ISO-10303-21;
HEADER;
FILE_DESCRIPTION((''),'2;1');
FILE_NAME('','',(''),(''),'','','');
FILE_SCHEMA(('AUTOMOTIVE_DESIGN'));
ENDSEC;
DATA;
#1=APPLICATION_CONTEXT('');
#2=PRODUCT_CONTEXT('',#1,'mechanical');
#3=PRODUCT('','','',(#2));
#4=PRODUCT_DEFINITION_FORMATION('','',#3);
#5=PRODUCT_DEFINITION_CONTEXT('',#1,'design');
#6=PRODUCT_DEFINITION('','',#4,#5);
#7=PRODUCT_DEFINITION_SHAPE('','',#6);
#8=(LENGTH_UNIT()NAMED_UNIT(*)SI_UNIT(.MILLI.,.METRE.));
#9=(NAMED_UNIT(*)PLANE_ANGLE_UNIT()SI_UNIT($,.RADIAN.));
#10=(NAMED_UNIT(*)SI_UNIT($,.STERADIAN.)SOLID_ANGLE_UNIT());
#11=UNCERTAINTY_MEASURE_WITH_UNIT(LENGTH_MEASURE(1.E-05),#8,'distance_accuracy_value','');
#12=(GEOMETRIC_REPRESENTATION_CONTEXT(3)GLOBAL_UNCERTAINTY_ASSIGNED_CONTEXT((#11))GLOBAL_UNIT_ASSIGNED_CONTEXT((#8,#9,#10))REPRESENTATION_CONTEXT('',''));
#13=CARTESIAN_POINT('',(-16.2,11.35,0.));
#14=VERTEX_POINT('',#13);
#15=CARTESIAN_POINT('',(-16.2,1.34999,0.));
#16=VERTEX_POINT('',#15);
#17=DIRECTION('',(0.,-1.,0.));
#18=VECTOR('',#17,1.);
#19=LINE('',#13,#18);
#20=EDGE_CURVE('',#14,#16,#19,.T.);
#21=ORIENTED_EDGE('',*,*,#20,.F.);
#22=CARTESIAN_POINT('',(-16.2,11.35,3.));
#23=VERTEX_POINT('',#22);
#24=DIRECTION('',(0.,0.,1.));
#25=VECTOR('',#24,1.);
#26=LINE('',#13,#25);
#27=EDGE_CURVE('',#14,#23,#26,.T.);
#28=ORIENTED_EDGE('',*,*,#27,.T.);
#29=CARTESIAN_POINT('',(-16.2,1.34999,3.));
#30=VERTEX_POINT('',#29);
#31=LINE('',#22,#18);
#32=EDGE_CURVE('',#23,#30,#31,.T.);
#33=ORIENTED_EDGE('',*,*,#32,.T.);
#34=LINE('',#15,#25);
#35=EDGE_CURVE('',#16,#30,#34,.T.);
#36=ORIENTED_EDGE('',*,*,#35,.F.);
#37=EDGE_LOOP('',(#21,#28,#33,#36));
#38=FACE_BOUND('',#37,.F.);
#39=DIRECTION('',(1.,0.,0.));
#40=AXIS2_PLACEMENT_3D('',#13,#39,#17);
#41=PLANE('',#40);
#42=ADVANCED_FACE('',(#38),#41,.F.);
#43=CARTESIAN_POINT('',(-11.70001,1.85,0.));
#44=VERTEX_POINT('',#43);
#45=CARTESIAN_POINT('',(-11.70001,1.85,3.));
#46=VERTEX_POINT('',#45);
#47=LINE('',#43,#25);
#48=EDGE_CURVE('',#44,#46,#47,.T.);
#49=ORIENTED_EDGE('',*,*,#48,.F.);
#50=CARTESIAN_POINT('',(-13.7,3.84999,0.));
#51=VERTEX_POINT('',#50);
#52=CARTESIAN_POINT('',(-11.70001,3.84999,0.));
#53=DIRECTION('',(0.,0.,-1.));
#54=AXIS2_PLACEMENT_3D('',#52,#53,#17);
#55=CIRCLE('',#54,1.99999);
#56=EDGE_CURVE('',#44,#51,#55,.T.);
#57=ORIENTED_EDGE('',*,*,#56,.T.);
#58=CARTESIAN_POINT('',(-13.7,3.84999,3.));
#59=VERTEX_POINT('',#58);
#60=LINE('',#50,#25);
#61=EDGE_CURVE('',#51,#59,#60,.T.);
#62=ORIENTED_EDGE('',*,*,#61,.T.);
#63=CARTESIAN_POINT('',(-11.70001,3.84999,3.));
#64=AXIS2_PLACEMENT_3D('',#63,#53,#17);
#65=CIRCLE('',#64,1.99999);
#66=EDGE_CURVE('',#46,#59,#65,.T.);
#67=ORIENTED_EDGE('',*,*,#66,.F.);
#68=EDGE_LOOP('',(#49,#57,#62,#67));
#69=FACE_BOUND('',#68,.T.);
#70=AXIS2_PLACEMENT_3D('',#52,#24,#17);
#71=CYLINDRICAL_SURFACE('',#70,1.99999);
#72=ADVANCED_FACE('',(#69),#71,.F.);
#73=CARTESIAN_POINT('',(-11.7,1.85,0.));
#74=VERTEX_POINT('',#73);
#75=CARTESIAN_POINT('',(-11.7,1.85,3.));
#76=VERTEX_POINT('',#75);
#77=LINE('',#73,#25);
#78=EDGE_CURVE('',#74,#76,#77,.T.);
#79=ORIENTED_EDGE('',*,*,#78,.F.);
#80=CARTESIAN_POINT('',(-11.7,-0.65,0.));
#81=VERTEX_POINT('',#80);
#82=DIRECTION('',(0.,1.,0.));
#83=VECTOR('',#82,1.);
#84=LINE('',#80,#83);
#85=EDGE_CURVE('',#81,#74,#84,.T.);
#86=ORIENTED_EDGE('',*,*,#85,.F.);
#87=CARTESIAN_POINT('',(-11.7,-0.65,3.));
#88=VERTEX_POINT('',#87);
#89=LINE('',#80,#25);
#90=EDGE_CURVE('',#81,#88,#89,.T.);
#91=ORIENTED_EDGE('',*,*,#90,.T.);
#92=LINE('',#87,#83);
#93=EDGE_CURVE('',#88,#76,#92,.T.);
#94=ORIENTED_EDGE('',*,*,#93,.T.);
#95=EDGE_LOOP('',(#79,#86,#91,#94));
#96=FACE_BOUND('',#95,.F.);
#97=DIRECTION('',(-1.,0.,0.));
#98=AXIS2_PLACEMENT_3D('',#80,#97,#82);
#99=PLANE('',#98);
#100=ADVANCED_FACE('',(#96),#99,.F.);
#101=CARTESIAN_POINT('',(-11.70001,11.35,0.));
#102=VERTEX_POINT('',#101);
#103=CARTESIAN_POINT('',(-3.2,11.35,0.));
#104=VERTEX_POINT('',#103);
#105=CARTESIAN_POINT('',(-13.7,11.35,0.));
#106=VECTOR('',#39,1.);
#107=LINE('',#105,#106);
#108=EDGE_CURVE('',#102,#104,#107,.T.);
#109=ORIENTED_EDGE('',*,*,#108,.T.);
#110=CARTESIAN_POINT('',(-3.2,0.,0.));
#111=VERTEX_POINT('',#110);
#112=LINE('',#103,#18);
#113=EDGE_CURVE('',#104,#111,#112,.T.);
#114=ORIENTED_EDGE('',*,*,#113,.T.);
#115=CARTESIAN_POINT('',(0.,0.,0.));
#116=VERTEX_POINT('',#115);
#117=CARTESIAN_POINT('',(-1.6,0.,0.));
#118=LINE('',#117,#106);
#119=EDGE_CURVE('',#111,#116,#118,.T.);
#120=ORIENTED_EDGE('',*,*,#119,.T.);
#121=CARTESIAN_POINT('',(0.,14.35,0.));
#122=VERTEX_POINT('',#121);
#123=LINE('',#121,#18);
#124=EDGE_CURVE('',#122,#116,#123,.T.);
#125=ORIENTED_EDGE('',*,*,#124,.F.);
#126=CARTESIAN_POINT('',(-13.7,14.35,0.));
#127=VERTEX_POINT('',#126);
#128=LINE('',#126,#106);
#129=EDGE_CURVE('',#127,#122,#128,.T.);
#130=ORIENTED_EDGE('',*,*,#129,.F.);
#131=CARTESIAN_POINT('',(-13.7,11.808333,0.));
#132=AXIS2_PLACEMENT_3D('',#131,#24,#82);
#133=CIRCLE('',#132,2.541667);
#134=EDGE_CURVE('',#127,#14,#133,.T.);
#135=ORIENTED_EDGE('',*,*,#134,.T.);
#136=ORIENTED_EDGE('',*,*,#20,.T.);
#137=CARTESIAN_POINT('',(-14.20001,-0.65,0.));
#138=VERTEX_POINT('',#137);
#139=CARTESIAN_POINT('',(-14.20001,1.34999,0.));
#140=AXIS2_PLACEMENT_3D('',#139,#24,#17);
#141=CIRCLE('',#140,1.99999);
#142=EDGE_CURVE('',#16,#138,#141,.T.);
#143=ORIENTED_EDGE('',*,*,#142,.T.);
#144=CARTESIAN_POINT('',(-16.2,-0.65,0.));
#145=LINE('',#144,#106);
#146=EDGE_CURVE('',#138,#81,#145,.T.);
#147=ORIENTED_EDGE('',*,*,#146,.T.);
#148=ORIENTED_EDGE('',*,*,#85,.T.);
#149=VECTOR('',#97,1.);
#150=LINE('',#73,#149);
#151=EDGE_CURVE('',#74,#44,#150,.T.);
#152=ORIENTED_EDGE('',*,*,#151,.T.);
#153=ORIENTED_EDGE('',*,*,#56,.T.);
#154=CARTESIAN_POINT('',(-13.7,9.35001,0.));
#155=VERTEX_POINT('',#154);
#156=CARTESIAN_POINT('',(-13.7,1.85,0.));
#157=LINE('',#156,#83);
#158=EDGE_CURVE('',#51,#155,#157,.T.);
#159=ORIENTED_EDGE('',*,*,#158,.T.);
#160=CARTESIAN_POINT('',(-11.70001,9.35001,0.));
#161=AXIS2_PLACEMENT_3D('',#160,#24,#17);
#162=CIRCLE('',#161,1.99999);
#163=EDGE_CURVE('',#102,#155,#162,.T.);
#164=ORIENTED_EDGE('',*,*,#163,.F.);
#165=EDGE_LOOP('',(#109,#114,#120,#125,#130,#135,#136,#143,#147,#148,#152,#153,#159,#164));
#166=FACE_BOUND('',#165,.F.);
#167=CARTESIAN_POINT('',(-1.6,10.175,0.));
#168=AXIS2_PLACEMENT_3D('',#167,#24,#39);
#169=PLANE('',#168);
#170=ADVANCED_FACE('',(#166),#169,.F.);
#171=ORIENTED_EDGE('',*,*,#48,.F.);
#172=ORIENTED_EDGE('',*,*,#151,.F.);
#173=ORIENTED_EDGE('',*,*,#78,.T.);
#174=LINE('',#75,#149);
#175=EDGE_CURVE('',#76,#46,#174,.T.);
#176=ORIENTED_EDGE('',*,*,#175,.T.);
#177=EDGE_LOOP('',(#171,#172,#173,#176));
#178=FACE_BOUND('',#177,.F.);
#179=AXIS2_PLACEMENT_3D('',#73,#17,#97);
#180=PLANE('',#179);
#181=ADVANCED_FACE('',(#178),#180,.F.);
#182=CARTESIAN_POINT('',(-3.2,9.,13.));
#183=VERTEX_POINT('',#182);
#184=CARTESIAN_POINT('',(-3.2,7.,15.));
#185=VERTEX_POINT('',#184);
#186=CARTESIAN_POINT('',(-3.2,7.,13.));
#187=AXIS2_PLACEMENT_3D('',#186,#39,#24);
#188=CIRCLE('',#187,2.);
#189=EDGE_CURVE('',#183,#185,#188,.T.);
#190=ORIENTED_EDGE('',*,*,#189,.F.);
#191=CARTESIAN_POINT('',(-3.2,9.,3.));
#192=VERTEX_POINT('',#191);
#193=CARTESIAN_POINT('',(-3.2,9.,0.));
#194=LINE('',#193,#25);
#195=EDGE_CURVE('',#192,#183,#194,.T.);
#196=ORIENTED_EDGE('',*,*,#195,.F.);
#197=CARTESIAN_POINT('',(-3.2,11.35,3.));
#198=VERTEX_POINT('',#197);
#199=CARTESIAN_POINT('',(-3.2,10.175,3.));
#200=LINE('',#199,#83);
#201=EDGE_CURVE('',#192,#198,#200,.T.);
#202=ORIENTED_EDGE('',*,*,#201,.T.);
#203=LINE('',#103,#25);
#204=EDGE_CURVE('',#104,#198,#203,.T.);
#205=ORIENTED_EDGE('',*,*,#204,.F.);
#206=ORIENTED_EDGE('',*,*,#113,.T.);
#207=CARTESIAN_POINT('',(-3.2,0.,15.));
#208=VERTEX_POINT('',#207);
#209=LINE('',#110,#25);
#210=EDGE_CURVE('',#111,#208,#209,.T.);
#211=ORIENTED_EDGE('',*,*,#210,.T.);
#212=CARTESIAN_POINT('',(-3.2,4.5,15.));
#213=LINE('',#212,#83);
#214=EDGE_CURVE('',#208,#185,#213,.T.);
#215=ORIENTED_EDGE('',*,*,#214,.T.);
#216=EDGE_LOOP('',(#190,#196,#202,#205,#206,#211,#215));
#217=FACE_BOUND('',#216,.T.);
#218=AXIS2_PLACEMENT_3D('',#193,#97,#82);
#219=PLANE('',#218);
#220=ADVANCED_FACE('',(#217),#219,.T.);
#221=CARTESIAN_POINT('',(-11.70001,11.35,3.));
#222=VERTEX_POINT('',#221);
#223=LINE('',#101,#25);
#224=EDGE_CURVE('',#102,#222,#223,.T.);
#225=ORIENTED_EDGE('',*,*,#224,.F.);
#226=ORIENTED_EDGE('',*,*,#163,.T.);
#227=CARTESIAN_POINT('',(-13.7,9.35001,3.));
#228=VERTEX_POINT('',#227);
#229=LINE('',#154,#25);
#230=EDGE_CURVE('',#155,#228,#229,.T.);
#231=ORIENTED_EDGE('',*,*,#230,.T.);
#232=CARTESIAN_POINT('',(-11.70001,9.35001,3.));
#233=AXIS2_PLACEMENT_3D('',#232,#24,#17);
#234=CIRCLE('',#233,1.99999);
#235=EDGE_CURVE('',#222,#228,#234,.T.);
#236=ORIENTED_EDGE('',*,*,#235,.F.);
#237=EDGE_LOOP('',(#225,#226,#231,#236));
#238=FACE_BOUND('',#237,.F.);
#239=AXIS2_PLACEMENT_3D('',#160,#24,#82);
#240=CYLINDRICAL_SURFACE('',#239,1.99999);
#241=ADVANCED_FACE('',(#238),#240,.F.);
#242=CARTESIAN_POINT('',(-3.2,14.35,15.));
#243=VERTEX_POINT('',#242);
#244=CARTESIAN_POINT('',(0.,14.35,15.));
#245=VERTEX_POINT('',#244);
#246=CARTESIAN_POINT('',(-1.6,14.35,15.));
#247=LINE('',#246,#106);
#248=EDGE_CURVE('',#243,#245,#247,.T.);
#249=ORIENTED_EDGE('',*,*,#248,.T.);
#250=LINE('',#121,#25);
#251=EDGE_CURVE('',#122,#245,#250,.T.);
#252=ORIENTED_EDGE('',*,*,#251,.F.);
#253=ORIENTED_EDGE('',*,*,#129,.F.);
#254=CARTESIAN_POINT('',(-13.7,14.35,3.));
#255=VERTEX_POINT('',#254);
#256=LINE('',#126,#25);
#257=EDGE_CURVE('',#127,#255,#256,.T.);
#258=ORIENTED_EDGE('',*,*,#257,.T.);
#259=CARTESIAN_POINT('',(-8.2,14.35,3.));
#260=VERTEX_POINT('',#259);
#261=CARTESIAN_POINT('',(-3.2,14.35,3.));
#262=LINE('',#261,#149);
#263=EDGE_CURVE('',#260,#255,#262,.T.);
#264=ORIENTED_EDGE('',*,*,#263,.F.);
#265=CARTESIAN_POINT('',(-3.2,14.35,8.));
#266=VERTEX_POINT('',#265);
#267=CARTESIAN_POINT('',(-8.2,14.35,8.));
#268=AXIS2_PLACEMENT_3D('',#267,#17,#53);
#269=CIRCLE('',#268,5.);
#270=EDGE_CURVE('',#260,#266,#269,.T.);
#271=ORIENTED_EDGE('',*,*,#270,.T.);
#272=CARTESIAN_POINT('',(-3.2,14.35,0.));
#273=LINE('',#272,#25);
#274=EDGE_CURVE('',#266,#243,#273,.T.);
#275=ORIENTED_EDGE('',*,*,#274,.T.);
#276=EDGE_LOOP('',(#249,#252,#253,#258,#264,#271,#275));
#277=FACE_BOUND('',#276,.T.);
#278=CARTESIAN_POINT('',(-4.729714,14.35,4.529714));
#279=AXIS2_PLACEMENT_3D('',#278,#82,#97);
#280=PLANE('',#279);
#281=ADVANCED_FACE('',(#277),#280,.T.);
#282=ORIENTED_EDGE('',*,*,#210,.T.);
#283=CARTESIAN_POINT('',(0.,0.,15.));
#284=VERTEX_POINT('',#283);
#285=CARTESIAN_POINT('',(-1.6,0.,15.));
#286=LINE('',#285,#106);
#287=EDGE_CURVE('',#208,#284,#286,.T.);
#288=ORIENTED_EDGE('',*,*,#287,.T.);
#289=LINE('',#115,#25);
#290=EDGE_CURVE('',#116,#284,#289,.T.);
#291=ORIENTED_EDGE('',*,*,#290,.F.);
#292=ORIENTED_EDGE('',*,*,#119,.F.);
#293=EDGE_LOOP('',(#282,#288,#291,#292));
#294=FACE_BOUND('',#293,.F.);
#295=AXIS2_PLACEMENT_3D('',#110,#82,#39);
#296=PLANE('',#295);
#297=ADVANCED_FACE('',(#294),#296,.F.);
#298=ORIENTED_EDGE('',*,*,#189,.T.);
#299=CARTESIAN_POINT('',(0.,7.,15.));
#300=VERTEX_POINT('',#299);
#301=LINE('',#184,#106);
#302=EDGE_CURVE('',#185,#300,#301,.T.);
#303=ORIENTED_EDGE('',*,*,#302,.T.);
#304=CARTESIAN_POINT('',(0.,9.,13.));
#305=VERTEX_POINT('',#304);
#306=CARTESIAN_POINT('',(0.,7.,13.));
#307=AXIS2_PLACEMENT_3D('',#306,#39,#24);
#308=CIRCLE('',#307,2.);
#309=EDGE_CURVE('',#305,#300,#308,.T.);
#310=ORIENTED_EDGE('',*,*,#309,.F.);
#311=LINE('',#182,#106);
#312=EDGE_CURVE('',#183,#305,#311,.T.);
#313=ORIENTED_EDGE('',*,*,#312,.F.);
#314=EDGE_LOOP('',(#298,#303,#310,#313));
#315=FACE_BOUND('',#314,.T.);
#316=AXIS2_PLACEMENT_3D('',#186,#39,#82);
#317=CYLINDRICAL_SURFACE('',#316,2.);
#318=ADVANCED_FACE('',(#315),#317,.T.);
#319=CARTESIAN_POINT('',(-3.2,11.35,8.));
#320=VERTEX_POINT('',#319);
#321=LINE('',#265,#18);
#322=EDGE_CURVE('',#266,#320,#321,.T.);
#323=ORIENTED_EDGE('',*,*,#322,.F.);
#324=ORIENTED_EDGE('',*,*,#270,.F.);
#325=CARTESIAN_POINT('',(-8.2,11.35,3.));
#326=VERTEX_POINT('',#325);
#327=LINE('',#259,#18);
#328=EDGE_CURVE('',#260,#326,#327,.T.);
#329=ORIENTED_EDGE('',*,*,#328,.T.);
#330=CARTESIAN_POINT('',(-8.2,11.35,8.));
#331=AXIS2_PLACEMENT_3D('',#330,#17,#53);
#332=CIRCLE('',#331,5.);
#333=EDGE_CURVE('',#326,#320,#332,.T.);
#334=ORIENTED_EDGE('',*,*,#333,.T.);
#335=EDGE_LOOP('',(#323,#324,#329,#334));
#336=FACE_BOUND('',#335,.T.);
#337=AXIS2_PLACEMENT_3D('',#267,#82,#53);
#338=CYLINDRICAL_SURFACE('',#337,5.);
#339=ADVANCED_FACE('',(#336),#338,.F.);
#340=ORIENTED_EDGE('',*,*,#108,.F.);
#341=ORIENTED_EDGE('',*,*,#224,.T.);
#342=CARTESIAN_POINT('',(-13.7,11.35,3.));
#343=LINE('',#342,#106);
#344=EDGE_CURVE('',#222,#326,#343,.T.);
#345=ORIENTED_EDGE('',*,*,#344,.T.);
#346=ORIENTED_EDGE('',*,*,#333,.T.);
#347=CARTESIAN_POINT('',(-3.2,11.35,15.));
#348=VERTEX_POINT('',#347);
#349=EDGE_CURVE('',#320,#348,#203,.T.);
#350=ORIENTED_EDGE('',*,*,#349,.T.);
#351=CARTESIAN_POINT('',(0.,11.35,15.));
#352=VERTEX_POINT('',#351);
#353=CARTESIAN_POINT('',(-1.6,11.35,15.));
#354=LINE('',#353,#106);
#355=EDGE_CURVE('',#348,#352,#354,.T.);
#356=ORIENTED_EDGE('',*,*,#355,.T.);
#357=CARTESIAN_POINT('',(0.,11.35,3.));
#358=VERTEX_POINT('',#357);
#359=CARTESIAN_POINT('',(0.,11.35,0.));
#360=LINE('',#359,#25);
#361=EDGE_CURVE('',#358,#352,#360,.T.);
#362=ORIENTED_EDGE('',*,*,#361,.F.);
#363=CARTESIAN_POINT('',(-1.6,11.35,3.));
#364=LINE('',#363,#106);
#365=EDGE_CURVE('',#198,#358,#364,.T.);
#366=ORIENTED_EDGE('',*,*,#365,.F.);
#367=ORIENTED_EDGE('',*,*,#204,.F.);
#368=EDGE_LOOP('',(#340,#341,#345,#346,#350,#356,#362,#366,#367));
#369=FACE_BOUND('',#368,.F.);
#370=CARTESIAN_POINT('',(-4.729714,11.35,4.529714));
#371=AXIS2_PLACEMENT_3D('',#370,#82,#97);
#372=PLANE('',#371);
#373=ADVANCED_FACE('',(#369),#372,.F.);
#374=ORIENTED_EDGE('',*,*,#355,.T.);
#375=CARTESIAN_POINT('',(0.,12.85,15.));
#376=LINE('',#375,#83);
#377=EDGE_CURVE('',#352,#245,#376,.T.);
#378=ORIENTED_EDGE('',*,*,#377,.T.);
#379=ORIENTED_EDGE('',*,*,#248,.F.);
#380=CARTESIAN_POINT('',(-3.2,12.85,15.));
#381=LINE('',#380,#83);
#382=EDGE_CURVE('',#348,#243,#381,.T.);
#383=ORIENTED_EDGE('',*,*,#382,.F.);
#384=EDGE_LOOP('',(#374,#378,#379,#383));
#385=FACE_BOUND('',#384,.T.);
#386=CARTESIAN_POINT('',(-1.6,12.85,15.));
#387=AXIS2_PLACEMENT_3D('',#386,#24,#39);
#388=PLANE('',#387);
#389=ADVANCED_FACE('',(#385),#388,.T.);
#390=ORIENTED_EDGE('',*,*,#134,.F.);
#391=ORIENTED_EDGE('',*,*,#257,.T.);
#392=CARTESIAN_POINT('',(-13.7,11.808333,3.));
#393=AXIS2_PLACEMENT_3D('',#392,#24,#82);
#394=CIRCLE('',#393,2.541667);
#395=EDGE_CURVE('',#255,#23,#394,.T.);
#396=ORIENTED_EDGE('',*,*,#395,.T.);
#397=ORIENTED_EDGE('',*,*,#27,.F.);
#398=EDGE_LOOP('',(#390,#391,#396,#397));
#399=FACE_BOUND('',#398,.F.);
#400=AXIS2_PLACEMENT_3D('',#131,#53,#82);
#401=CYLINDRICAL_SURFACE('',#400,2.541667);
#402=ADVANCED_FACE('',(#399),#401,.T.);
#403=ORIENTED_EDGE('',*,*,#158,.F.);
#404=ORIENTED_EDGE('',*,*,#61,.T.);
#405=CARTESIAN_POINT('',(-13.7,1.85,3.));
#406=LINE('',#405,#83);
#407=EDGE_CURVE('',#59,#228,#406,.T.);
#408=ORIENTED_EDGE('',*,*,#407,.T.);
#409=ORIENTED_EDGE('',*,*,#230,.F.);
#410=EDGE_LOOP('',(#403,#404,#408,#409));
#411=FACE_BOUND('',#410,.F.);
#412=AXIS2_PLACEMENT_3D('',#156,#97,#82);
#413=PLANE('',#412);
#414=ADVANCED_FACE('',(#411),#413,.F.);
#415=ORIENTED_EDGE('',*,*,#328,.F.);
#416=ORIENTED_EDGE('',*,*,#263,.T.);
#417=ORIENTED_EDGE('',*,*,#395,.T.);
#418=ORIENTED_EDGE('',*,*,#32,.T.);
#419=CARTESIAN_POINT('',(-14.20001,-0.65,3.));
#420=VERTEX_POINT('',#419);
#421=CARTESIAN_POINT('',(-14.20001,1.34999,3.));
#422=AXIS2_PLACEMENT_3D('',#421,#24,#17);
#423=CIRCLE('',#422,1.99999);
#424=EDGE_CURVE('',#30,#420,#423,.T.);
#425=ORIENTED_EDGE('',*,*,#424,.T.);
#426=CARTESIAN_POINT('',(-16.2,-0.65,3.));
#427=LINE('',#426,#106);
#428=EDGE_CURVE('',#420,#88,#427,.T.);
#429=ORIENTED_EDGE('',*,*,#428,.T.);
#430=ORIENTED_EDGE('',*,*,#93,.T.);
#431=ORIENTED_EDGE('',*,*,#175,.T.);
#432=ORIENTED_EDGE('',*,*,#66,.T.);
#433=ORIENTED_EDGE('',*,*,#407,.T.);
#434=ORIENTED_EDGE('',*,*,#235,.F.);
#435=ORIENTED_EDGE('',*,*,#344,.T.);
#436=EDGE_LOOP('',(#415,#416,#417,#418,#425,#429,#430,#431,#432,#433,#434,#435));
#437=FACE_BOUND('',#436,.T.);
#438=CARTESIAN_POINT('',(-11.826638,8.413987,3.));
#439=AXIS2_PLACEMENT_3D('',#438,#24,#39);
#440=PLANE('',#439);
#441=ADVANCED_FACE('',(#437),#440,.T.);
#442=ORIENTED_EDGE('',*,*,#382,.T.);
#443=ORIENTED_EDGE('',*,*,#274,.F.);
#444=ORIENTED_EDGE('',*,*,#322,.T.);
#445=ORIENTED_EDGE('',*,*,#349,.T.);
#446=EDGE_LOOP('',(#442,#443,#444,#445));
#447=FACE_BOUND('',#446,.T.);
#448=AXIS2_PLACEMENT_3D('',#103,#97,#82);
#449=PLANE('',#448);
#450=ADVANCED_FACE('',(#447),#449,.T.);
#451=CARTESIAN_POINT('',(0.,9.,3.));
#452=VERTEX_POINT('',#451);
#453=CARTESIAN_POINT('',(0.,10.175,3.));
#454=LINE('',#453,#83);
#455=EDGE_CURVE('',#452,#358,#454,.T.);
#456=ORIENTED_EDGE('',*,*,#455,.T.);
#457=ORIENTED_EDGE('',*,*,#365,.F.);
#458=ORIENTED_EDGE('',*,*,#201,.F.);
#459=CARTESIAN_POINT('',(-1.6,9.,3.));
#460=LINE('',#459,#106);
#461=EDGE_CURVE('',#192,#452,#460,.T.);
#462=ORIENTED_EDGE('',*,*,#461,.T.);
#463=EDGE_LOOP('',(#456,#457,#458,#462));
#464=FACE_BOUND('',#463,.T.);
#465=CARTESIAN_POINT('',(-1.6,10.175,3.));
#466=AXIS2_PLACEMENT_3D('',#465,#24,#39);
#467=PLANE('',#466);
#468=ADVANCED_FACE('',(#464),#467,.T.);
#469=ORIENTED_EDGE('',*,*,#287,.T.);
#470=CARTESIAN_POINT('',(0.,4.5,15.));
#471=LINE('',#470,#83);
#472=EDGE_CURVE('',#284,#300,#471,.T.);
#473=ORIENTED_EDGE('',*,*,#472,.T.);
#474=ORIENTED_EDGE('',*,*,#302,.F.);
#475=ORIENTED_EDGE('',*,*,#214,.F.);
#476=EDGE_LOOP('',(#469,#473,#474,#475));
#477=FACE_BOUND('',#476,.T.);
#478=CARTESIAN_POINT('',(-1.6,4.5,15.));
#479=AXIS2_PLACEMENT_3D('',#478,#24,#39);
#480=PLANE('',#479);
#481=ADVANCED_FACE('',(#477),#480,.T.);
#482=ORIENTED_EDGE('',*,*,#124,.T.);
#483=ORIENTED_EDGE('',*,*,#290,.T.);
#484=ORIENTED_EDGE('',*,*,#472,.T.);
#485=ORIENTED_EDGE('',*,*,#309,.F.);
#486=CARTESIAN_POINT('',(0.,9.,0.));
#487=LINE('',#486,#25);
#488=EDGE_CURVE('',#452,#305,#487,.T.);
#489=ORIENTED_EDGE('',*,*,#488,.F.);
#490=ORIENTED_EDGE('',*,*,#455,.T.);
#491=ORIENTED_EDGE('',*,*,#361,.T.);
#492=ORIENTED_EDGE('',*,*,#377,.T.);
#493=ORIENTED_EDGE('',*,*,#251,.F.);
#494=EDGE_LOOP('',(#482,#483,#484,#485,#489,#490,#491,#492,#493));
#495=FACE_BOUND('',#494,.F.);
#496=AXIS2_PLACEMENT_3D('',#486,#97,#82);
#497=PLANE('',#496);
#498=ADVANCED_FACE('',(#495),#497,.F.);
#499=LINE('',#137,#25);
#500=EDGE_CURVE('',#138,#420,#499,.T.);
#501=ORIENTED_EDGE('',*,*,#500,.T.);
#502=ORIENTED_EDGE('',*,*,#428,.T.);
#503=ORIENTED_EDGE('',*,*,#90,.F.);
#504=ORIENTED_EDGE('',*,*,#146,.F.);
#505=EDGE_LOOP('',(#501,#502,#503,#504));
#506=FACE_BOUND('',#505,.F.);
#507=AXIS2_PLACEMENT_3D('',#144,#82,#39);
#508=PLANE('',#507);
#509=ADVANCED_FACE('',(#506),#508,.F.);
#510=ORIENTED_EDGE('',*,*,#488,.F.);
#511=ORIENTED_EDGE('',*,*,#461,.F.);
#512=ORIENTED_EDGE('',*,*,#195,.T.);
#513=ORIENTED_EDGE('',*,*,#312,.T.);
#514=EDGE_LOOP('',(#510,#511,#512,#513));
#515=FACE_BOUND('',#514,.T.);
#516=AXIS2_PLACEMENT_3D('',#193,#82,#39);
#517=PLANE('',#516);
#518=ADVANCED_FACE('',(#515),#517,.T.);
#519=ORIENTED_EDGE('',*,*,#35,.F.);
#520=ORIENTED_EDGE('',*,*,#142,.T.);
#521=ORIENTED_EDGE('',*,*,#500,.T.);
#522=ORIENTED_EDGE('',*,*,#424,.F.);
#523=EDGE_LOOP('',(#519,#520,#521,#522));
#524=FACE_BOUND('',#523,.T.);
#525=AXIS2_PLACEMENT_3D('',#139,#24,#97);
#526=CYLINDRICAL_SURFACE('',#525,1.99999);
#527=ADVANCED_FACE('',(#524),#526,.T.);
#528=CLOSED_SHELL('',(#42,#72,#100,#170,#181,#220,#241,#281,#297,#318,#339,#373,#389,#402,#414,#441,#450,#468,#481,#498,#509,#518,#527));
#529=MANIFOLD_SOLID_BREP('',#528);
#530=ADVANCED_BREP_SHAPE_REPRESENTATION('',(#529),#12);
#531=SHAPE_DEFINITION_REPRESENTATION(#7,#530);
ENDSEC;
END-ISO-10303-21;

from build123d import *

# Parameters (mm, degrees)
F0_W        = 3.2
F0_H        = 9
F1_DEPTH    = 15
F0_H_2      = 3
F0_H_3      = 2.35
F2_DEPTH    = 3
F3_R        = 2
F4_R        = 1.99999
F5_T1_DEPTH = 3


# Not quite as in the source:
# - a fillet or chamfer that OpenCascade refuses, or shapes differently, is made with other operations: its cross-section is extruded or revolved along the edge and cut away or added
# - a fillet or chamfer is up to 0.001 mm smaller than in the source, because OpenCascade refuses the exact size


with BuildPart() as f1:
    # F0 (on Top) → F1 (new body)
    with BuildSketch(Plane.XY):
        with Locations((-1.6, 4.5)):
            Rectangle(F0_W, F0_H)
    extrude(amount=F1_DEPTH)



with BuildPart() as f1b:
    # F0 (on Top) → F1, piece 2 (new body)
    with BuildSketch(Plane.XY):
        with Locations((-1.6, 12.85)):
            Rectangle(F0_W, F0_H_2)
    extrude(amount=F1_DEPTH)


with BuildPart() as f1_1:
    add(f1.part)

    add(f1b.part)  # F2 merges F1b
    # F0 (on Top) → F2 (join)
    with BuildSketch(Plane.XY):
        with Locations((-1.6, 10.175)):
            Rectangle(F0_W, F0_H_3)
        with BuildLine():
            Line((-13.7, 11.35), (-3.2, 11.35))
            Line((-3.2, 11.35), (-3.2, 14.35))
            Line((-3.2, 14.35), (-13.7, 14.35))
            ThreePointArc((-13.7, 14.35), (-15.652562419, 13.4354686825), (-16.2, 11.35))
            Line((-16.2, 11.35), (-16.2, -0.65))
            Line((-16.2, -0.65), (-13.7, -0.65))
            Line((-13.7, -0.65), (-11.7, -0.65))
            Line((-11.7, -0.65), (-11.7, 1.85))
            Line((-11.7, 1.85), (-13.7, 1.85))
            Line((-13.7, 1.85), (-13.7, 11.35))
        make_face()
    extrude(amount=F2_DEPTH)

    # F3
    f3_edges = [f1_1.edges().sort_by_distance(p)[0] for p in [
        (-1.6, 9, 15),
    ]]
    fillet(f3_edges, radius=F3_R)

    # F4 (radius 2 in the source; OpenCascade refuses exactly that, so slightly less here)
    f4_edges = [f1_1.edges().sort_by_distance(p)[0] for p in [
        (-16.2, -0.65, 1.5),
        (-13.7, 11.35, 1.5),
        (-13.7, 1.85, 1.5),
    ]]
    fillet(f4_edges, radius=F4_R)

    # F5: fillet of radius 5 on 1 edges, made by hand

    # F5_s2 → F5_t1 (join)
    with BuildSketch(Plane.XZ.offset(-14.35)):
        with BuildLine():
            ThreePointArc((-8.2, 3), (-4.6644660941, 4.4644660941), (-3.2, 8))
            Line((-3.2, 8), (-3.2, 3))
            Line((-3.2, 3), (-8.2, 3))
        make_face()
    extrude(amount=F5_T1_DEPTH)


solid = f1_1.part
